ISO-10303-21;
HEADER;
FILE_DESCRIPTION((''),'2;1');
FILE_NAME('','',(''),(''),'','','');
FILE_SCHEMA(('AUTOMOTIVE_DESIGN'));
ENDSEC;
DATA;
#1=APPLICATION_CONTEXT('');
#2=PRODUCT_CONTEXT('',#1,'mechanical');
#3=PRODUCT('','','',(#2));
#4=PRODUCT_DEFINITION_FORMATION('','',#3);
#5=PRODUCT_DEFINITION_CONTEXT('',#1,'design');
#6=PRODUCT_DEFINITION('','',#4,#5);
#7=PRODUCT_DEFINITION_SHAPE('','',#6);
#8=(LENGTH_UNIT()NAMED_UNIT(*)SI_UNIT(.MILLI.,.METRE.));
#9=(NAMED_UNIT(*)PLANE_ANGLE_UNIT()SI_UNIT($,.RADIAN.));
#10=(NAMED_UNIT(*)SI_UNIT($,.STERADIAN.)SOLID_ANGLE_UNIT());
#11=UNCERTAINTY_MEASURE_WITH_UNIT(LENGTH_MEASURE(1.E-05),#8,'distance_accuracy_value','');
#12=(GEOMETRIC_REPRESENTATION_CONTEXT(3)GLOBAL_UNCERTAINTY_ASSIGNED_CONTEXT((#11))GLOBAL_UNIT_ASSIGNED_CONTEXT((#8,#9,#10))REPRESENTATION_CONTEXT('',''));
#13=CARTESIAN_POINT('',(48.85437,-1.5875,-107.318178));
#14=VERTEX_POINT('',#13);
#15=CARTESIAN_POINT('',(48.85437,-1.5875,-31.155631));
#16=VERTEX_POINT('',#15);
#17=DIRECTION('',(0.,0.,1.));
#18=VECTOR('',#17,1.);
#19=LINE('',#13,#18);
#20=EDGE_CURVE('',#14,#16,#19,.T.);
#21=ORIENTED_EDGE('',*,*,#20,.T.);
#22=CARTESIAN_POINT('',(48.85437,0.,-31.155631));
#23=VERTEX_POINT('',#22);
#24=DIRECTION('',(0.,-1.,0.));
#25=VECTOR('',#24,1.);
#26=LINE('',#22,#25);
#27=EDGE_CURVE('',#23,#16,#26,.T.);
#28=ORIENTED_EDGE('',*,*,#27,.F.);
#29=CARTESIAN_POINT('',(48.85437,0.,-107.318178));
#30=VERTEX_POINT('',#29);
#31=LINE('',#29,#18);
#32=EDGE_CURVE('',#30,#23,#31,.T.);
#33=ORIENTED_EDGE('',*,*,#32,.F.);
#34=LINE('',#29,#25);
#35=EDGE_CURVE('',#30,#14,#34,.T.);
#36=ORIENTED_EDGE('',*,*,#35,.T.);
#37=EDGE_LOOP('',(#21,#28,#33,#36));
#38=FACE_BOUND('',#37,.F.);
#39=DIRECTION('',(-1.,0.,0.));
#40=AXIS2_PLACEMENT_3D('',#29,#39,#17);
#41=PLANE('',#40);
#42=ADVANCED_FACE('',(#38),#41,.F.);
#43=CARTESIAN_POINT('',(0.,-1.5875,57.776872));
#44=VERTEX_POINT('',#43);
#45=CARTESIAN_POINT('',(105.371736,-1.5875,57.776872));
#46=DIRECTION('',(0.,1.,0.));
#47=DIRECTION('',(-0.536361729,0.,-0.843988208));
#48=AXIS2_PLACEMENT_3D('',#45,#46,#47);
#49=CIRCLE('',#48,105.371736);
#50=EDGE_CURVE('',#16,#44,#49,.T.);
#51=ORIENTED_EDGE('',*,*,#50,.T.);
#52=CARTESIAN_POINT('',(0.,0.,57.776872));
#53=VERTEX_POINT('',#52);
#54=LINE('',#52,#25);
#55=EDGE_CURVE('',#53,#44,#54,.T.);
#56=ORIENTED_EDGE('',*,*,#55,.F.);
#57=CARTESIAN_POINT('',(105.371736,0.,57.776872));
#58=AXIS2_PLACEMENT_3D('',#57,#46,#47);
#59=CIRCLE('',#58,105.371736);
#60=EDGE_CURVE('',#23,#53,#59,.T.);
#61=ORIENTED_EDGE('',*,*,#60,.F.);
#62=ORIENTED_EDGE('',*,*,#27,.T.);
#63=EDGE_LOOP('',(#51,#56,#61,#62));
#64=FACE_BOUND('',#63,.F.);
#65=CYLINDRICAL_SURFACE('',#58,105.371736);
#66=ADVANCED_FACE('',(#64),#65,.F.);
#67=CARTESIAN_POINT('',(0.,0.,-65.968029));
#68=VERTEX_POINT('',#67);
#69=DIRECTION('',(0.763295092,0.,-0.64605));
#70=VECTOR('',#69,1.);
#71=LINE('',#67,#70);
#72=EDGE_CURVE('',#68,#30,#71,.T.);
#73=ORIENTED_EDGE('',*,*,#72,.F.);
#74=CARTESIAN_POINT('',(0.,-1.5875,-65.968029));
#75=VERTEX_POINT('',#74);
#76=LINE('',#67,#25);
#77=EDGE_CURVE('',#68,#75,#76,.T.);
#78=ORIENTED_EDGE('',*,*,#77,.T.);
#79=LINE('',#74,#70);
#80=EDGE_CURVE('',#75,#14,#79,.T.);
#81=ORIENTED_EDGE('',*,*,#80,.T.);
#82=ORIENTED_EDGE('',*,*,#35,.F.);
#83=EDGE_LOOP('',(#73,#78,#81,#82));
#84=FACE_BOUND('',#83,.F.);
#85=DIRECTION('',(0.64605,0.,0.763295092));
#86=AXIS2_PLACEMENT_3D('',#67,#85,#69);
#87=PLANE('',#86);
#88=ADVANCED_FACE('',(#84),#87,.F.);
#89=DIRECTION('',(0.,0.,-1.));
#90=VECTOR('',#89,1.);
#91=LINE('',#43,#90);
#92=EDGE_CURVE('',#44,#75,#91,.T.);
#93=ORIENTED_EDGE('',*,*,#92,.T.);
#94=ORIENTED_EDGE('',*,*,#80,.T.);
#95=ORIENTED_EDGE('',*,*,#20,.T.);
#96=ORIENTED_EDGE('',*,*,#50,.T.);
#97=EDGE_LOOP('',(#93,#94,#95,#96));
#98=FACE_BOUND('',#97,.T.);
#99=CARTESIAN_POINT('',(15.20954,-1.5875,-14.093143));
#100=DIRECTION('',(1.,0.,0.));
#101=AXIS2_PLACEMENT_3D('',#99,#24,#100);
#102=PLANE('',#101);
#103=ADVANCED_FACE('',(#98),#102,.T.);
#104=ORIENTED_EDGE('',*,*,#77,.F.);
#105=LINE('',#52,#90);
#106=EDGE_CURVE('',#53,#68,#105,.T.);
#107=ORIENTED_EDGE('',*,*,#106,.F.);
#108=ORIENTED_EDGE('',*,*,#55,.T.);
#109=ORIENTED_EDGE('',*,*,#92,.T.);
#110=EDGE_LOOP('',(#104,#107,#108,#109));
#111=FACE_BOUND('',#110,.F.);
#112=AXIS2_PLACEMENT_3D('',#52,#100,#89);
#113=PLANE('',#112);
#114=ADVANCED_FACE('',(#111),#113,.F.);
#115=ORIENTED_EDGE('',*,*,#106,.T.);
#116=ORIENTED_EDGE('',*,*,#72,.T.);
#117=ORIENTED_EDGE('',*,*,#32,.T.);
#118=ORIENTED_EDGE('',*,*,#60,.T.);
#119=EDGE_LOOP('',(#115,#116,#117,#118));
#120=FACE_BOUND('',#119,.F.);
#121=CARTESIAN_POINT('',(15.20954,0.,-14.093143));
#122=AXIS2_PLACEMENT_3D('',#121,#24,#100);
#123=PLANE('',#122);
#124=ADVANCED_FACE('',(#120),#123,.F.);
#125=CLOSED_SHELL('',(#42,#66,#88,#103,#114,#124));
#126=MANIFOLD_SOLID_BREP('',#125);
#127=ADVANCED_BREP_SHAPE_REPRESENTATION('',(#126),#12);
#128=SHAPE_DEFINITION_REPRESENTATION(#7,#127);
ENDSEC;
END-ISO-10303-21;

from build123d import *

# Parameters (mm, degrees)
F1_DEPTH = 1.5875


# Not quite as in the source:
# - a length typed as a fraction of an inch, garbled in the dataset ("3 / 203.2 mm" for 3/8 in), is restored


with BuildPart() as f1:
    # F0 (on Front) → F1 (new body)
    with BuildSketch(Plane.XZ):
        with BuildLine():
            ThreePointArc((48.8543696702, -31.1556309462), (13.0177004808, 7.0429102473), (0, 57.7768720686))
            Line((0, 57.7768720686), (0, -65.968029201))
            Line((0, -65.968029201), (48.8543696702, -65.968029201))
            Line((48.8543696702, -65.968029201), (48.8543696702, -31.1556309462))
        make_face()
        Polygon((48.8543696702, -65.968029201), (0, -65.968029201), (48.8543696702, -107.3181778193), align=None)
    extrude(amount=F1_DEPTH)


solid = f1.part
